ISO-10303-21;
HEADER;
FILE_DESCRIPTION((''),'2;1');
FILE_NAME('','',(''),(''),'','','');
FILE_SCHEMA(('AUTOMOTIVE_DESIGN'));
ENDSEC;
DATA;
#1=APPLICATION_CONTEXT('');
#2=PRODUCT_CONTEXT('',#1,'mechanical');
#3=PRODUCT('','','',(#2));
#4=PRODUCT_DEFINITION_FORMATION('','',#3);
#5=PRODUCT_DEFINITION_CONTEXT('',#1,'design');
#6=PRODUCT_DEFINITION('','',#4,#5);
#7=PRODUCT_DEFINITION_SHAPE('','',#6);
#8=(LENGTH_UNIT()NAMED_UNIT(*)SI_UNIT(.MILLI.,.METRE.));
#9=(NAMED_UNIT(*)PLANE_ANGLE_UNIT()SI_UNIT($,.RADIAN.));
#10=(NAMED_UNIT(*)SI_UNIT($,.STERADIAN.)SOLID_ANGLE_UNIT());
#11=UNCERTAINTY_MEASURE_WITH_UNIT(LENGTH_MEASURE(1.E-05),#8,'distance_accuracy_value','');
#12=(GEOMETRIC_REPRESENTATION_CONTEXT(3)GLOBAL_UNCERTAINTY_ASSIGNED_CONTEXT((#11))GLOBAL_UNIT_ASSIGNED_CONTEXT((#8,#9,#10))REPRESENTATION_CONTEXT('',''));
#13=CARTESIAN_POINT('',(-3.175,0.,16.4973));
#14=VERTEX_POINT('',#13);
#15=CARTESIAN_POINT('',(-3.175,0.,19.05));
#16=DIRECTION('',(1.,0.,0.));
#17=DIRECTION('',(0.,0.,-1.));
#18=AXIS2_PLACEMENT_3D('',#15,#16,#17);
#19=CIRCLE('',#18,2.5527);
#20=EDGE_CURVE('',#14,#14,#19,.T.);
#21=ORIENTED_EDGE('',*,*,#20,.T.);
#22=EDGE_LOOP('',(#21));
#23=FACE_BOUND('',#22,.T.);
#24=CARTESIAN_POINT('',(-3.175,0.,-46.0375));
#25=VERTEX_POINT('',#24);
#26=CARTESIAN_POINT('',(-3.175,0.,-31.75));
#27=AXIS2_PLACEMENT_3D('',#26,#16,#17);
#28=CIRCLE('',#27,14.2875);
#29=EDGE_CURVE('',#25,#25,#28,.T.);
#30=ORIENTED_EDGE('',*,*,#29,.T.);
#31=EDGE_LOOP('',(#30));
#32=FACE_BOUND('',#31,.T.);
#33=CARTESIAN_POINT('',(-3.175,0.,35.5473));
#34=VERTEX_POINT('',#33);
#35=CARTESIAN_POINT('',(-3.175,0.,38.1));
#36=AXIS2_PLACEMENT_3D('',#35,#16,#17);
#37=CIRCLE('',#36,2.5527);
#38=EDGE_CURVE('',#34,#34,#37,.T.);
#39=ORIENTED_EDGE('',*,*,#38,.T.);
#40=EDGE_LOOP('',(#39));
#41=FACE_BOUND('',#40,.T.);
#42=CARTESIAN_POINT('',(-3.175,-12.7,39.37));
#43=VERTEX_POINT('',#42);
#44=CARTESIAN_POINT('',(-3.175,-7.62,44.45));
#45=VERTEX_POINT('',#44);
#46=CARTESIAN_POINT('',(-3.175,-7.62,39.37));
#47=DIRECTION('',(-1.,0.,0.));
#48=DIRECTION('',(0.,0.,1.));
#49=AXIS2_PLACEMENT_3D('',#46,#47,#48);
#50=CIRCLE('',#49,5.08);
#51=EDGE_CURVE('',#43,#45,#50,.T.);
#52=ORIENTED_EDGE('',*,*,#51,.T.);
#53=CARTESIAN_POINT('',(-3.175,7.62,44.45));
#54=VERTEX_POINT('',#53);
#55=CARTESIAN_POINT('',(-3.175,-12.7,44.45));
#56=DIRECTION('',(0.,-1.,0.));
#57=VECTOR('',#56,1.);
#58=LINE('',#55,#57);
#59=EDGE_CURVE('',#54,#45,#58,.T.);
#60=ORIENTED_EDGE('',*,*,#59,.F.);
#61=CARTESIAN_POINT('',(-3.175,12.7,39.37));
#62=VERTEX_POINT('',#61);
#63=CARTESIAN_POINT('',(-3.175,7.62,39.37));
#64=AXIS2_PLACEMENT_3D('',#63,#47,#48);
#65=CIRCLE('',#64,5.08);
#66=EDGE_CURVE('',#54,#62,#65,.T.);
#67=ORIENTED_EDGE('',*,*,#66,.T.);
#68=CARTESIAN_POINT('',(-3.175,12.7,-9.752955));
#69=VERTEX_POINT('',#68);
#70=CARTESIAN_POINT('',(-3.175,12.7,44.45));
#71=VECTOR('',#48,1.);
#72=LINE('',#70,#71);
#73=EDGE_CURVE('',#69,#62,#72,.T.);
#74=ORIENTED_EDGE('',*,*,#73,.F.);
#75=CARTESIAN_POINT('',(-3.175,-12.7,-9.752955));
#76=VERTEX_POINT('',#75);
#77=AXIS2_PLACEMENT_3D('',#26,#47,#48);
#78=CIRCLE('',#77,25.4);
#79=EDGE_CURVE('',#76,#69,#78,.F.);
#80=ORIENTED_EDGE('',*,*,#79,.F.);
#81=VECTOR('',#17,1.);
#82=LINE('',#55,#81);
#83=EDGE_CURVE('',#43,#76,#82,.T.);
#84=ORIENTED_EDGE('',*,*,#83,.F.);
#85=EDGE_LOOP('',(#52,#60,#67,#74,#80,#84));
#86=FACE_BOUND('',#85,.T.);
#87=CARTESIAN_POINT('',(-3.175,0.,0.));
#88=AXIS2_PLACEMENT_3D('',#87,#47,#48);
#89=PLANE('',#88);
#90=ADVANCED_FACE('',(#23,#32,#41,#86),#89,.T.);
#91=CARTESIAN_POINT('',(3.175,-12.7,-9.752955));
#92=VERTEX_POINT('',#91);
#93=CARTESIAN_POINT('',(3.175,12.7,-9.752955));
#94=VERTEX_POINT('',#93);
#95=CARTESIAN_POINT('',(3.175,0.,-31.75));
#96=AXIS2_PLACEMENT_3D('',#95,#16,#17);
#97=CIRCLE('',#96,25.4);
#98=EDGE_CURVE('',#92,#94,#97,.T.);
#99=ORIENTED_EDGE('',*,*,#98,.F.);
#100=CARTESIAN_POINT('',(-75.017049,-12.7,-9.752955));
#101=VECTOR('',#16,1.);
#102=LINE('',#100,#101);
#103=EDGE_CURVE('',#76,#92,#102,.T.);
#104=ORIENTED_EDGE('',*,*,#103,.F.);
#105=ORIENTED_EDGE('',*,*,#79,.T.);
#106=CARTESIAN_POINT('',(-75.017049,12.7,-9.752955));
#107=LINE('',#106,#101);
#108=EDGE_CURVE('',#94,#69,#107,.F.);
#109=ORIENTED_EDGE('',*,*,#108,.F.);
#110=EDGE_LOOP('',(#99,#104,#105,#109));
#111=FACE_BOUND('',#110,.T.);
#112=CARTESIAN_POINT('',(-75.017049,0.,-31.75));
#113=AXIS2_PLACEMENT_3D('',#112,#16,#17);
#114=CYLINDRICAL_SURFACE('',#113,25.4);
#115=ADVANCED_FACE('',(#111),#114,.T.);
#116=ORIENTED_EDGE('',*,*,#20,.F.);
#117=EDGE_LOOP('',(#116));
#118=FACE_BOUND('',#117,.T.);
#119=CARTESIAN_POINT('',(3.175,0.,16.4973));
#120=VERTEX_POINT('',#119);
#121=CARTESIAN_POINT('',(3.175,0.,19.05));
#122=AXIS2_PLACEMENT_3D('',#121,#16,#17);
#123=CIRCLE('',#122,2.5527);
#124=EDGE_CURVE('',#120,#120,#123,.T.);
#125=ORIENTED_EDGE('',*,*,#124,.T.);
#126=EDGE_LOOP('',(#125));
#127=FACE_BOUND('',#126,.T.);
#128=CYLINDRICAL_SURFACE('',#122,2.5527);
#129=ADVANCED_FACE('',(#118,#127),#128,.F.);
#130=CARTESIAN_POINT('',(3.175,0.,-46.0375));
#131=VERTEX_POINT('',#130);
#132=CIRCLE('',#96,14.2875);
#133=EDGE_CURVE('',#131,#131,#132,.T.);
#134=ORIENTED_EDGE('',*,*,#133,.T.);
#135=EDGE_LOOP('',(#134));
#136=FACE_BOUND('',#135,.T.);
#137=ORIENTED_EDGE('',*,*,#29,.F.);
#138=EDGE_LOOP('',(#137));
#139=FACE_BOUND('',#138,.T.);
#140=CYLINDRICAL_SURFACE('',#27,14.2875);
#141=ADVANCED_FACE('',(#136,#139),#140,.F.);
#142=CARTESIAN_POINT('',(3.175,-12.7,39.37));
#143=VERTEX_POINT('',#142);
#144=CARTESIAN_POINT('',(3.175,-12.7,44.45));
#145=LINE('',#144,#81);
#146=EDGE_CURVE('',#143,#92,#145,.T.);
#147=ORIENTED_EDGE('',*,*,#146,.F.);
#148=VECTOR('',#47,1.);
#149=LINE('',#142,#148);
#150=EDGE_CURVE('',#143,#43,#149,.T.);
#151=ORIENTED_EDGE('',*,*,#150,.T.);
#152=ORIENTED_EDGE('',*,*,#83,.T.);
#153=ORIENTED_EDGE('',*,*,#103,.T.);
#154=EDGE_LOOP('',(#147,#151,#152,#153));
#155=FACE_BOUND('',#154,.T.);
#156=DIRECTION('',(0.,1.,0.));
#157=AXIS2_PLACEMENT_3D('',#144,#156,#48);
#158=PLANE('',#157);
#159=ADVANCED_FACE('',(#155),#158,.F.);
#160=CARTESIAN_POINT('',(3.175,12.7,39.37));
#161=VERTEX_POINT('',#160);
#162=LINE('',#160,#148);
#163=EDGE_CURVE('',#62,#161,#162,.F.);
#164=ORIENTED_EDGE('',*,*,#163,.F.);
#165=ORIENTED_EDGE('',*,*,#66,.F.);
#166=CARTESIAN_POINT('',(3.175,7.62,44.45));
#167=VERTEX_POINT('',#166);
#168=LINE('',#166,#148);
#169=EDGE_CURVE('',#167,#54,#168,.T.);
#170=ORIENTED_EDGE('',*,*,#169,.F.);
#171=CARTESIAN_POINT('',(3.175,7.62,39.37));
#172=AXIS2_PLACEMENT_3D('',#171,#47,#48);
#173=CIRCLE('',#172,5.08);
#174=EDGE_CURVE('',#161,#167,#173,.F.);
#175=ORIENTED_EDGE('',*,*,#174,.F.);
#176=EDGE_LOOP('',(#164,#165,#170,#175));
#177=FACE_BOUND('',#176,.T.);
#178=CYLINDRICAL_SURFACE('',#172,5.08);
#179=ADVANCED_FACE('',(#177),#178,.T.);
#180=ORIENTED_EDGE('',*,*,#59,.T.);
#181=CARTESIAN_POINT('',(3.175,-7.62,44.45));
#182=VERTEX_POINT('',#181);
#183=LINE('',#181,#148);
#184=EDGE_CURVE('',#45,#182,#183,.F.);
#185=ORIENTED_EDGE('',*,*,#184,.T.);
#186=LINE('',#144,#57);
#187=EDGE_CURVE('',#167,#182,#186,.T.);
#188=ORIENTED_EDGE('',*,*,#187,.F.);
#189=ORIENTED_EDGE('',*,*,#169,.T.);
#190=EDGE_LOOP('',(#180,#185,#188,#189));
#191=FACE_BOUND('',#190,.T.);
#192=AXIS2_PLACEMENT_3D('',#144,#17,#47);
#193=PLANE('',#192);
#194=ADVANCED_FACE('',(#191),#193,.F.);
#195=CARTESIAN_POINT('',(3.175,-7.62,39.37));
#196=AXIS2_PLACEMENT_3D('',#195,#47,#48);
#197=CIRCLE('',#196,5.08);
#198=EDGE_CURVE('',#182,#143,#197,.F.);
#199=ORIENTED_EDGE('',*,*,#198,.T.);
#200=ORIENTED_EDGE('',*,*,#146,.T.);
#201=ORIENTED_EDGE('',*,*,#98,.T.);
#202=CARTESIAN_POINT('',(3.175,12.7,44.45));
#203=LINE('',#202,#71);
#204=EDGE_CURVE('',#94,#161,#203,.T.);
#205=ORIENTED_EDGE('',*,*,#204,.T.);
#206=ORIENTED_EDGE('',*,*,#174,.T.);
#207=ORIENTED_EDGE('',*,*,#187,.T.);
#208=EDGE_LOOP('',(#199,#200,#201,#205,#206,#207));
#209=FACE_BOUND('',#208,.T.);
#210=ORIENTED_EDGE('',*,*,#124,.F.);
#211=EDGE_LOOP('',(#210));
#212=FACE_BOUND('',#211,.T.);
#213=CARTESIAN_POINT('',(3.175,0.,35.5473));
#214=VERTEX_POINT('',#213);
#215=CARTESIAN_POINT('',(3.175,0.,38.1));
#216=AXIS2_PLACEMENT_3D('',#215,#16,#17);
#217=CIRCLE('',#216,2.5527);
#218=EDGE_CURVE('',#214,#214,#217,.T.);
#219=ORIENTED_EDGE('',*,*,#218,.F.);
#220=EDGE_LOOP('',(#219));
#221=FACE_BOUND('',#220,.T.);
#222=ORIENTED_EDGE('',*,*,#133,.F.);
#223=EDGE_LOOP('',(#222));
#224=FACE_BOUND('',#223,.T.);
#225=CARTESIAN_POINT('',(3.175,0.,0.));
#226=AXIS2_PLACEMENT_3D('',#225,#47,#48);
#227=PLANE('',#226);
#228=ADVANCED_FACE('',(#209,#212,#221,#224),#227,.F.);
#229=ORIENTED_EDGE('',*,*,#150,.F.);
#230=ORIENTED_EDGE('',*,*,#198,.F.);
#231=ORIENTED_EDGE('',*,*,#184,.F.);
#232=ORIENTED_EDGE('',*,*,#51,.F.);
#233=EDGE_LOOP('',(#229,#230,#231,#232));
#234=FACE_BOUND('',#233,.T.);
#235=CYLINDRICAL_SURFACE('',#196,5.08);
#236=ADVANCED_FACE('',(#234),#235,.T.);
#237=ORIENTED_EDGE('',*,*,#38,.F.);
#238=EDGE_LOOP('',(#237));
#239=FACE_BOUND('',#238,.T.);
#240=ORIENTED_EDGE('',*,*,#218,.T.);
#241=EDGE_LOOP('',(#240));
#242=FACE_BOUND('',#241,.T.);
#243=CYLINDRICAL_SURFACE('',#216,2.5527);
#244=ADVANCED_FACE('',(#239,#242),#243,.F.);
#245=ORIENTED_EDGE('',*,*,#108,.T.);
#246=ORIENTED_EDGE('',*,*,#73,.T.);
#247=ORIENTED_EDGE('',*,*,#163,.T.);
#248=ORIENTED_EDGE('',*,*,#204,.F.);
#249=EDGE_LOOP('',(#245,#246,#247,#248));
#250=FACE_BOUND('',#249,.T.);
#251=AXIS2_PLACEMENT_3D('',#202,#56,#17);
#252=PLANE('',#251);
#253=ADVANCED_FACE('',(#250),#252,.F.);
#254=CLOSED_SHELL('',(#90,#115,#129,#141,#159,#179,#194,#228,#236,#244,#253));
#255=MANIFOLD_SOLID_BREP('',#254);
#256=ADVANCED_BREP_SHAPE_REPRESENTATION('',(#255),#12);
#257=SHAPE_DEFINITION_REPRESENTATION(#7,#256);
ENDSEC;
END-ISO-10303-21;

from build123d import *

# Parameters (mm, degrees)
SKETCH1_W              = 88.9
SKETCH1_H              = 25.4
BOSS_EXTRUDE1_DEPTH    = 3.175
FILLET1_R              = 12.7
F_10_CLEARANCE_HOLE1_D = 5.1054
FILLET2_R              = 5.08
SKETCH6_R              = 25.4
BOSS_EXTRUDE2_DEPTH    = 6.35
SKETCH7_R              = 14.2875
CUT_EXTRUDE1_DEPTH     = 63.861792847


with BuildPart() as part:
    # Sketch1 → Boss-Extrude1 (new, symmetric)
    with BuildSketch(Plane(origin=(0, 0, 0), x_dir=(0, 0, -1), z_dir=(1, 0, 0))):
        Rectangle(SKETCH1_W, SKETCH1_H)
    extrude(amount=BOSS_EXTRUDE1_DEPTH, both=True)

    # Fillet1
    fillet1_edges = [part.edges().sort_by_distance(p)[0] for p in [
        (0, -12.7, -44.45),
        (0, 12.7, -44.45),
    ]]
    fillet(fillet1_edges, radius=FILLET1_R - 0.0001)  # a hair under: the kernel refuses the full size

    # #10 Clearance Hole1 (through all)
    with Locations(Plane(origin=(3.175, 6.272913445, 168.827028559), x_dir=(0, 0, -1), z_dir=(1, 0, 0))):
        with Locations((149.777028559, -6.272913445), (130.727028559, -6.272913445)):
            Hole(F_10_CLEARANCE_HOLE1_D / 2)

    # Fillet2
    fillet2_edges = [part.edges().sort_by_distance(p)[0] for p in [
        (0, -12.7, 44.45),
        (0, 12.7, 44.45),
    ]]
    fillet(fillet2_edges, radius=FILLET2_R)

    # Sketch6 → Boss-Extrude2 (add)
    with BuildSketch(Plane(origin=(3.175, 0, 0), x_dir=(0, 0, -1), z_dir=(1, 0, 0))):
        with Locations((31.75, 0)):
            Circle(SKETCH6_R)
    extrude(amount=-BOSS_EXTRUDE2_DEPTH)

    # Sketch7 → Cut-Extrude1 (cut, through all)
    with BuildSketch(Plane(origin=(3.175, 0, 0), x_dir=(0, 0, -1), z_dir=(1, 0, 0))):
        with Locations((31.75, 0)):
            Circle(SKETCH7_R)
    extrude(amount=-CUT_EXTRUDE1_DEPTH, mode=Mode.SUBTRACT)


solid = part.part
